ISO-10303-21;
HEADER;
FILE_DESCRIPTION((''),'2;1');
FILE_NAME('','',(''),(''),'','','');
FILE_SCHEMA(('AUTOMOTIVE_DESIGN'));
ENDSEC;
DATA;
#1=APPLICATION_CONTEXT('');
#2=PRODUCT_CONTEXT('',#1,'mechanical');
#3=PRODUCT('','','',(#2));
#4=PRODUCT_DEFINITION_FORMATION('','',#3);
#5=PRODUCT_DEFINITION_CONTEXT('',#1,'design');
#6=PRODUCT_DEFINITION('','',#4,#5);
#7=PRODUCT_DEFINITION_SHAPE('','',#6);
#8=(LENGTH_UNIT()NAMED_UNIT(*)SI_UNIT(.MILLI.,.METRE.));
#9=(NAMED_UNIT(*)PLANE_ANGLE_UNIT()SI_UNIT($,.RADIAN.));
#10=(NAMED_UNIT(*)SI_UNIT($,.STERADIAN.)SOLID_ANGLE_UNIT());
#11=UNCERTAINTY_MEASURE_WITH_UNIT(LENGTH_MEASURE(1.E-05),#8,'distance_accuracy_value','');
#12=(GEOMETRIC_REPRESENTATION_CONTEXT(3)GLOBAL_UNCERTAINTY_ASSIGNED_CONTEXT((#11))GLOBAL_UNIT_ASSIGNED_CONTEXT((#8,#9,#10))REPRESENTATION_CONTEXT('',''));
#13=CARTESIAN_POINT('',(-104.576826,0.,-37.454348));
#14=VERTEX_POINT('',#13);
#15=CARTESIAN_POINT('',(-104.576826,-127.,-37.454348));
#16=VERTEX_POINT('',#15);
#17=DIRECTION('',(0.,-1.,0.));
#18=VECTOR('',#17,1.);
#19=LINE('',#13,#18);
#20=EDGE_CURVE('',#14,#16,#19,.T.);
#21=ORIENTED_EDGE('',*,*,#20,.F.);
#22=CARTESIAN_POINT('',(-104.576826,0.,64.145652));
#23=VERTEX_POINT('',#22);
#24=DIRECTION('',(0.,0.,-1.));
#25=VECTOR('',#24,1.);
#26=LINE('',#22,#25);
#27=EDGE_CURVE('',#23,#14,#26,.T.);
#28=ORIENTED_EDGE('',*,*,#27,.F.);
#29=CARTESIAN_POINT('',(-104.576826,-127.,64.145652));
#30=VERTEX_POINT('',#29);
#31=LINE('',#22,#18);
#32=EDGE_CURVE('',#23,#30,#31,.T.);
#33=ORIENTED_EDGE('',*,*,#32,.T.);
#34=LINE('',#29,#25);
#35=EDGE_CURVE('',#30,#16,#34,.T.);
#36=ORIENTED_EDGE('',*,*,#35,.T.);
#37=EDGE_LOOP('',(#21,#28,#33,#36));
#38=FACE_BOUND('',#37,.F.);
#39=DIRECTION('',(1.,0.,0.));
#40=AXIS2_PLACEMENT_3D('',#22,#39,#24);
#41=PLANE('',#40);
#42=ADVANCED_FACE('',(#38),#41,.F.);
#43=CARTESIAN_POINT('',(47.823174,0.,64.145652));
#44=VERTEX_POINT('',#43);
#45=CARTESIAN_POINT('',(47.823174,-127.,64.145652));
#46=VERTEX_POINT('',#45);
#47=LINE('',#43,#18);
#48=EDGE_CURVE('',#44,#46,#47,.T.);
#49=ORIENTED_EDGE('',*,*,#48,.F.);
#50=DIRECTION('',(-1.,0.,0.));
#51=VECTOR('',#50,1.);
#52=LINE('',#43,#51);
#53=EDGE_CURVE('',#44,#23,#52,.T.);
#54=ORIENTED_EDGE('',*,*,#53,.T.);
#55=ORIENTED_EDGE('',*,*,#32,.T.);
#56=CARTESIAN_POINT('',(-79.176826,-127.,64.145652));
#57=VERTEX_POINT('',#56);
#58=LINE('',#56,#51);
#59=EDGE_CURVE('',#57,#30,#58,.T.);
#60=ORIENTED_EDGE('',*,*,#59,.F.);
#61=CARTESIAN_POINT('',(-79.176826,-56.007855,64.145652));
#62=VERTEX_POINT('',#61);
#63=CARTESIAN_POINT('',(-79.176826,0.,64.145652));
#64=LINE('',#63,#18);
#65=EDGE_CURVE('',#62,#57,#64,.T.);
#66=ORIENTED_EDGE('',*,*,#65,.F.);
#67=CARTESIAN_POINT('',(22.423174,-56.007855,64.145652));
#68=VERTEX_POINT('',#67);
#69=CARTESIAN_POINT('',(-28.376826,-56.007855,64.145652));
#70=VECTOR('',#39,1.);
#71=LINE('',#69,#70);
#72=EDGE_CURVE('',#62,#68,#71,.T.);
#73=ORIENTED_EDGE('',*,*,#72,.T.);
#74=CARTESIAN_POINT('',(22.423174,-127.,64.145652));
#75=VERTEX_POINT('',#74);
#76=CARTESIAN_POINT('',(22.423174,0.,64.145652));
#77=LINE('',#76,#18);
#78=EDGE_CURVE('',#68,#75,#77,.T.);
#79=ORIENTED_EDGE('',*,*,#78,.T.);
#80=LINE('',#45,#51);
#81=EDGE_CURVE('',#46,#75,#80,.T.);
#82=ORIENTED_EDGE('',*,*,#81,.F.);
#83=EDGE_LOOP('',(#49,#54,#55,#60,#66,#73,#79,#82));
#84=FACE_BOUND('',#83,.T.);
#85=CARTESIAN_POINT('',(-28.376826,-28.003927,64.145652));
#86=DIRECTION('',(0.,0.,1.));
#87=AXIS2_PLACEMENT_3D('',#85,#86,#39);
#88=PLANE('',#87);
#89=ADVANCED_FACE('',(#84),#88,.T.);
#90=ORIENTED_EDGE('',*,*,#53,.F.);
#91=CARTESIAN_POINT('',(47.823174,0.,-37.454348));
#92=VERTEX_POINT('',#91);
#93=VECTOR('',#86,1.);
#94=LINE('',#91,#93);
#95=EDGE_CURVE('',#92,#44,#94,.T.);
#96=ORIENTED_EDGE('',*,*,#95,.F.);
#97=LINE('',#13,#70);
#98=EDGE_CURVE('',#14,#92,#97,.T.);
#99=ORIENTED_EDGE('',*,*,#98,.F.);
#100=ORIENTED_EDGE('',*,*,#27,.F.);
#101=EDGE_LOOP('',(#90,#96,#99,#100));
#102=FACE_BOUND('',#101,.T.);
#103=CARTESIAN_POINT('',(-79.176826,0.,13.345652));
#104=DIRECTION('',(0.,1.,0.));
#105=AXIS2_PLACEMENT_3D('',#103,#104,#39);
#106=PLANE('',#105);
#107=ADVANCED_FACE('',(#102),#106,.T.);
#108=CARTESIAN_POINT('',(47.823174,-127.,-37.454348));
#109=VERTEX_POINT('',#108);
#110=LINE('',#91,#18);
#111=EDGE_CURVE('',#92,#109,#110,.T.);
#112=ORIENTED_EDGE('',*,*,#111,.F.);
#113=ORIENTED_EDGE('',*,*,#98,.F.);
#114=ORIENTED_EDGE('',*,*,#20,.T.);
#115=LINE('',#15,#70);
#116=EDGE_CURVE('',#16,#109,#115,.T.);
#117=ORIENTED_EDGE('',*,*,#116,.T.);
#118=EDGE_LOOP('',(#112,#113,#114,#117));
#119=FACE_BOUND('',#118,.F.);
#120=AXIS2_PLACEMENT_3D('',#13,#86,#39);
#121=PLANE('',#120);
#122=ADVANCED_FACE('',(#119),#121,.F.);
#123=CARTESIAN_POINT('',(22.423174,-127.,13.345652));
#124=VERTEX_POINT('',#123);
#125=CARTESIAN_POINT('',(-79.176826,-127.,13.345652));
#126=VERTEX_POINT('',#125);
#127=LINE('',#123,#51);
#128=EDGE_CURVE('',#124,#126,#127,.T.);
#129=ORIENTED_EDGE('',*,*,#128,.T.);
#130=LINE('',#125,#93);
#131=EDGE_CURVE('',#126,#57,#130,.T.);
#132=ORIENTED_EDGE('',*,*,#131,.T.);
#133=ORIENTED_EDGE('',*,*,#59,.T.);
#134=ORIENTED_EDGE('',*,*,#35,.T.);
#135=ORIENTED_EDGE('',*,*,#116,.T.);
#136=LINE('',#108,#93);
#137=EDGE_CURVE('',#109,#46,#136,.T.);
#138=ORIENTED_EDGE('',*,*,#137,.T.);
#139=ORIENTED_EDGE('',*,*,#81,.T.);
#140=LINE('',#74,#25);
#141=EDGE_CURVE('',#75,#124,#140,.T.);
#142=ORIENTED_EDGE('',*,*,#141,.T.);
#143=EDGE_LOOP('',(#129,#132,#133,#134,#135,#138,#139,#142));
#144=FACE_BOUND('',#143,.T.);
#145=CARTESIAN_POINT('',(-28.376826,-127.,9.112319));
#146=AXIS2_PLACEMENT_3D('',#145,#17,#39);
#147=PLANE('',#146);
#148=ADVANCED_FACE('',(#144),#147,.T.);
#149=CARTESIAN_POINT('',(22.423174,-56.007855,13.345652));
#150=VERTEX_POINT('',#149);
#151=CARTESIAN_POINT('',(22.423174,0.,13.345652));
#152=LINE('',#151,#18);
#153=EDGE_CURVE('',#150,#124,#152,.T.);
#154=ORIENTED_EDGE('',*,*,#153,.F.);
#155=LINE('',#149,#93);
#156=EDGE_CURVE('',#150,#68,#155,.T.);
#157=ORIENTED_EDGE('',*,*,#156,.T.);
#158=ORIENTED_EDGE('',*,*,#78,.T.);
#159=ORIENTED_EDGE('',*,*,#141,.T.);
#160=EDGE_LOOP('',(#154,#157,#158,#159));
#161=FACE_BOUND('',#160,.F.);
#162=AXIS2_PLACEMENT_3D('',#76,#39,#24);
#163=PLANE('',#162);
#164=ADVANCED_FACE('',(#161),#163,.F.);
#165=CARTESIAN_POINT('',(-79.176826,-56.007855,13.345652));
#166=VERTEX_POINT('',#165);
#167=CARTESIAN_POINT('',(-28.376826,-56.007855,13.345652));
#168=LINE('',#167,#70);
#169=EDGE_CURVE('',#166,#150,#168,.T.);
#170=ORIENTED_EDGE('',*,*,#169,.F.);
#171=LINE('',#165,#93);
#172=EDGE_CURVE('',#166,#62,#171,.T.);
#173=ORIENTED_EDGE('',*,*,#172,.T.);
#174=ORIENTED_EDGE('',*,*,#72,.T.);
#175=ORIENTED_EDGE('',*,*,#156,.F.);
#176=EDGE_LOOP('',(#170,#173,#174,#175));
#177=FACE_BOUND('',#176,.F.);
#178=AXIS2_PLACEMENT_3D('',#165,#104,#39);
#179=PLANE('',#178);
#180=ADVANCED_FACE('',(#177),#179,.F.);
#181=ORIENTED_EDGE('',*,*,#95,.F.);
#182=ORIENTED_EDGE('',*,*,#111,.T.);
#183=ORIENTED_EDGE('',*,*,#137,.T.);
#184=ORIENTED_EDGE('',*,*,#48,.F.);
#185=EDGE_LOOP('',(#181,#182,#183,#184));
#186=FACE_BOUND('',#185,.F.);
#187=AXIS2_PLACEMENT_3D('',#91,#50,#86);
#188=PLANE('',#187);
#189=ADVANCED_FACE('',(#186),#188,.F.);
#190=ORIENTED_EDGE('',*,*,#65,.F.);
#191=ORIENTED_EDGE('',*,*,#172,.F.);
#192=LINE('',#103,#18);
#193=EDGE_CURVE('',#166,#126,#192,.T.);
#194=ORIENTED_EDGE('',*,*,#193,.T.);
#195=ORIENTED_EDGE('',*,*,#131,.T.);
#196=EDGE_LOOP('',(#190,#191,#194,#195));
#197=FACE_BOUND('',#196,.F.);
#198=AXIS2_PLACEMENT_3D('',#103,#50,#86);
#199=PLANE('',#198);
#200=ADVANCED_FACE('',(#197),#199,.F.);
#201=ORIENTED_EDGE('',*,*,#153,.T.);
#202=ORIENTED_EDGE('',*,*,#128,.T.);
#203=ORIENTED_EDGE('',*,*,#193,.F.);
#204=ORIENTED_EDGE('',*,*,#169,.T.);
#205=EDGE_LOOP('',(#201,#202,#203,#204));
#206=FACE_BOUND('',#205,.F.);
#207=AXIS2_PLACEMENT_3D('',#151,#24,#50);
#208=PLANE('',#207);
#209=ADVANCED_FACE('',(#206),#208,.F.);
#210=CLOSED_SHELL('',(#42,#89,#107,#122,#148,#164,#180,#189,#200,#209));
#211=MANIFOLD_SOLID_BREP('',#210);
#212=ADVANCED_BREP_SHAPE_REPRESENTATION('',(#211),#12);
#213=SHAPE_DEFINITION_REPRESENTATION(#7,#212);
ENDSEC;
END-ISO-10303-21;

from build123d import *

# Parameters (mm, degrees)
F1_DEPTH = 127
F2_W     = 101.6
F2_H     = 56.0078546405
F3_DEPTH = 50.8


with BuildPart() as f1:
    # F0 (on Front) → F1 (new body)
    with BuildSketch(Plane.XZ):
        Polygon((-104.5768260956, 64.1456519425), (-104.5768260956, -37.4543480575), (47.8231739044, -37.4543480575), (47.8231739044, 64.1456519425), (22.4231739044, 64.1456519425), (22.4231739044, 13.3456519425), (-79.1768260956, 13.3456519425), (-79.1768260956, 64.1456519425), align=None)
    extrude(amount=F1_DEPTH)

    # F2 (on face) → F3 (join)
    with BuildSketch(Plane.XY.offset(13.3456519425)):
        with Locations((-28.3768260956, -28.0039273202)):
            Rectangle(F2_W, F2_H)
    extrude(amount=F3_DEPTH)


solid = f1.part
